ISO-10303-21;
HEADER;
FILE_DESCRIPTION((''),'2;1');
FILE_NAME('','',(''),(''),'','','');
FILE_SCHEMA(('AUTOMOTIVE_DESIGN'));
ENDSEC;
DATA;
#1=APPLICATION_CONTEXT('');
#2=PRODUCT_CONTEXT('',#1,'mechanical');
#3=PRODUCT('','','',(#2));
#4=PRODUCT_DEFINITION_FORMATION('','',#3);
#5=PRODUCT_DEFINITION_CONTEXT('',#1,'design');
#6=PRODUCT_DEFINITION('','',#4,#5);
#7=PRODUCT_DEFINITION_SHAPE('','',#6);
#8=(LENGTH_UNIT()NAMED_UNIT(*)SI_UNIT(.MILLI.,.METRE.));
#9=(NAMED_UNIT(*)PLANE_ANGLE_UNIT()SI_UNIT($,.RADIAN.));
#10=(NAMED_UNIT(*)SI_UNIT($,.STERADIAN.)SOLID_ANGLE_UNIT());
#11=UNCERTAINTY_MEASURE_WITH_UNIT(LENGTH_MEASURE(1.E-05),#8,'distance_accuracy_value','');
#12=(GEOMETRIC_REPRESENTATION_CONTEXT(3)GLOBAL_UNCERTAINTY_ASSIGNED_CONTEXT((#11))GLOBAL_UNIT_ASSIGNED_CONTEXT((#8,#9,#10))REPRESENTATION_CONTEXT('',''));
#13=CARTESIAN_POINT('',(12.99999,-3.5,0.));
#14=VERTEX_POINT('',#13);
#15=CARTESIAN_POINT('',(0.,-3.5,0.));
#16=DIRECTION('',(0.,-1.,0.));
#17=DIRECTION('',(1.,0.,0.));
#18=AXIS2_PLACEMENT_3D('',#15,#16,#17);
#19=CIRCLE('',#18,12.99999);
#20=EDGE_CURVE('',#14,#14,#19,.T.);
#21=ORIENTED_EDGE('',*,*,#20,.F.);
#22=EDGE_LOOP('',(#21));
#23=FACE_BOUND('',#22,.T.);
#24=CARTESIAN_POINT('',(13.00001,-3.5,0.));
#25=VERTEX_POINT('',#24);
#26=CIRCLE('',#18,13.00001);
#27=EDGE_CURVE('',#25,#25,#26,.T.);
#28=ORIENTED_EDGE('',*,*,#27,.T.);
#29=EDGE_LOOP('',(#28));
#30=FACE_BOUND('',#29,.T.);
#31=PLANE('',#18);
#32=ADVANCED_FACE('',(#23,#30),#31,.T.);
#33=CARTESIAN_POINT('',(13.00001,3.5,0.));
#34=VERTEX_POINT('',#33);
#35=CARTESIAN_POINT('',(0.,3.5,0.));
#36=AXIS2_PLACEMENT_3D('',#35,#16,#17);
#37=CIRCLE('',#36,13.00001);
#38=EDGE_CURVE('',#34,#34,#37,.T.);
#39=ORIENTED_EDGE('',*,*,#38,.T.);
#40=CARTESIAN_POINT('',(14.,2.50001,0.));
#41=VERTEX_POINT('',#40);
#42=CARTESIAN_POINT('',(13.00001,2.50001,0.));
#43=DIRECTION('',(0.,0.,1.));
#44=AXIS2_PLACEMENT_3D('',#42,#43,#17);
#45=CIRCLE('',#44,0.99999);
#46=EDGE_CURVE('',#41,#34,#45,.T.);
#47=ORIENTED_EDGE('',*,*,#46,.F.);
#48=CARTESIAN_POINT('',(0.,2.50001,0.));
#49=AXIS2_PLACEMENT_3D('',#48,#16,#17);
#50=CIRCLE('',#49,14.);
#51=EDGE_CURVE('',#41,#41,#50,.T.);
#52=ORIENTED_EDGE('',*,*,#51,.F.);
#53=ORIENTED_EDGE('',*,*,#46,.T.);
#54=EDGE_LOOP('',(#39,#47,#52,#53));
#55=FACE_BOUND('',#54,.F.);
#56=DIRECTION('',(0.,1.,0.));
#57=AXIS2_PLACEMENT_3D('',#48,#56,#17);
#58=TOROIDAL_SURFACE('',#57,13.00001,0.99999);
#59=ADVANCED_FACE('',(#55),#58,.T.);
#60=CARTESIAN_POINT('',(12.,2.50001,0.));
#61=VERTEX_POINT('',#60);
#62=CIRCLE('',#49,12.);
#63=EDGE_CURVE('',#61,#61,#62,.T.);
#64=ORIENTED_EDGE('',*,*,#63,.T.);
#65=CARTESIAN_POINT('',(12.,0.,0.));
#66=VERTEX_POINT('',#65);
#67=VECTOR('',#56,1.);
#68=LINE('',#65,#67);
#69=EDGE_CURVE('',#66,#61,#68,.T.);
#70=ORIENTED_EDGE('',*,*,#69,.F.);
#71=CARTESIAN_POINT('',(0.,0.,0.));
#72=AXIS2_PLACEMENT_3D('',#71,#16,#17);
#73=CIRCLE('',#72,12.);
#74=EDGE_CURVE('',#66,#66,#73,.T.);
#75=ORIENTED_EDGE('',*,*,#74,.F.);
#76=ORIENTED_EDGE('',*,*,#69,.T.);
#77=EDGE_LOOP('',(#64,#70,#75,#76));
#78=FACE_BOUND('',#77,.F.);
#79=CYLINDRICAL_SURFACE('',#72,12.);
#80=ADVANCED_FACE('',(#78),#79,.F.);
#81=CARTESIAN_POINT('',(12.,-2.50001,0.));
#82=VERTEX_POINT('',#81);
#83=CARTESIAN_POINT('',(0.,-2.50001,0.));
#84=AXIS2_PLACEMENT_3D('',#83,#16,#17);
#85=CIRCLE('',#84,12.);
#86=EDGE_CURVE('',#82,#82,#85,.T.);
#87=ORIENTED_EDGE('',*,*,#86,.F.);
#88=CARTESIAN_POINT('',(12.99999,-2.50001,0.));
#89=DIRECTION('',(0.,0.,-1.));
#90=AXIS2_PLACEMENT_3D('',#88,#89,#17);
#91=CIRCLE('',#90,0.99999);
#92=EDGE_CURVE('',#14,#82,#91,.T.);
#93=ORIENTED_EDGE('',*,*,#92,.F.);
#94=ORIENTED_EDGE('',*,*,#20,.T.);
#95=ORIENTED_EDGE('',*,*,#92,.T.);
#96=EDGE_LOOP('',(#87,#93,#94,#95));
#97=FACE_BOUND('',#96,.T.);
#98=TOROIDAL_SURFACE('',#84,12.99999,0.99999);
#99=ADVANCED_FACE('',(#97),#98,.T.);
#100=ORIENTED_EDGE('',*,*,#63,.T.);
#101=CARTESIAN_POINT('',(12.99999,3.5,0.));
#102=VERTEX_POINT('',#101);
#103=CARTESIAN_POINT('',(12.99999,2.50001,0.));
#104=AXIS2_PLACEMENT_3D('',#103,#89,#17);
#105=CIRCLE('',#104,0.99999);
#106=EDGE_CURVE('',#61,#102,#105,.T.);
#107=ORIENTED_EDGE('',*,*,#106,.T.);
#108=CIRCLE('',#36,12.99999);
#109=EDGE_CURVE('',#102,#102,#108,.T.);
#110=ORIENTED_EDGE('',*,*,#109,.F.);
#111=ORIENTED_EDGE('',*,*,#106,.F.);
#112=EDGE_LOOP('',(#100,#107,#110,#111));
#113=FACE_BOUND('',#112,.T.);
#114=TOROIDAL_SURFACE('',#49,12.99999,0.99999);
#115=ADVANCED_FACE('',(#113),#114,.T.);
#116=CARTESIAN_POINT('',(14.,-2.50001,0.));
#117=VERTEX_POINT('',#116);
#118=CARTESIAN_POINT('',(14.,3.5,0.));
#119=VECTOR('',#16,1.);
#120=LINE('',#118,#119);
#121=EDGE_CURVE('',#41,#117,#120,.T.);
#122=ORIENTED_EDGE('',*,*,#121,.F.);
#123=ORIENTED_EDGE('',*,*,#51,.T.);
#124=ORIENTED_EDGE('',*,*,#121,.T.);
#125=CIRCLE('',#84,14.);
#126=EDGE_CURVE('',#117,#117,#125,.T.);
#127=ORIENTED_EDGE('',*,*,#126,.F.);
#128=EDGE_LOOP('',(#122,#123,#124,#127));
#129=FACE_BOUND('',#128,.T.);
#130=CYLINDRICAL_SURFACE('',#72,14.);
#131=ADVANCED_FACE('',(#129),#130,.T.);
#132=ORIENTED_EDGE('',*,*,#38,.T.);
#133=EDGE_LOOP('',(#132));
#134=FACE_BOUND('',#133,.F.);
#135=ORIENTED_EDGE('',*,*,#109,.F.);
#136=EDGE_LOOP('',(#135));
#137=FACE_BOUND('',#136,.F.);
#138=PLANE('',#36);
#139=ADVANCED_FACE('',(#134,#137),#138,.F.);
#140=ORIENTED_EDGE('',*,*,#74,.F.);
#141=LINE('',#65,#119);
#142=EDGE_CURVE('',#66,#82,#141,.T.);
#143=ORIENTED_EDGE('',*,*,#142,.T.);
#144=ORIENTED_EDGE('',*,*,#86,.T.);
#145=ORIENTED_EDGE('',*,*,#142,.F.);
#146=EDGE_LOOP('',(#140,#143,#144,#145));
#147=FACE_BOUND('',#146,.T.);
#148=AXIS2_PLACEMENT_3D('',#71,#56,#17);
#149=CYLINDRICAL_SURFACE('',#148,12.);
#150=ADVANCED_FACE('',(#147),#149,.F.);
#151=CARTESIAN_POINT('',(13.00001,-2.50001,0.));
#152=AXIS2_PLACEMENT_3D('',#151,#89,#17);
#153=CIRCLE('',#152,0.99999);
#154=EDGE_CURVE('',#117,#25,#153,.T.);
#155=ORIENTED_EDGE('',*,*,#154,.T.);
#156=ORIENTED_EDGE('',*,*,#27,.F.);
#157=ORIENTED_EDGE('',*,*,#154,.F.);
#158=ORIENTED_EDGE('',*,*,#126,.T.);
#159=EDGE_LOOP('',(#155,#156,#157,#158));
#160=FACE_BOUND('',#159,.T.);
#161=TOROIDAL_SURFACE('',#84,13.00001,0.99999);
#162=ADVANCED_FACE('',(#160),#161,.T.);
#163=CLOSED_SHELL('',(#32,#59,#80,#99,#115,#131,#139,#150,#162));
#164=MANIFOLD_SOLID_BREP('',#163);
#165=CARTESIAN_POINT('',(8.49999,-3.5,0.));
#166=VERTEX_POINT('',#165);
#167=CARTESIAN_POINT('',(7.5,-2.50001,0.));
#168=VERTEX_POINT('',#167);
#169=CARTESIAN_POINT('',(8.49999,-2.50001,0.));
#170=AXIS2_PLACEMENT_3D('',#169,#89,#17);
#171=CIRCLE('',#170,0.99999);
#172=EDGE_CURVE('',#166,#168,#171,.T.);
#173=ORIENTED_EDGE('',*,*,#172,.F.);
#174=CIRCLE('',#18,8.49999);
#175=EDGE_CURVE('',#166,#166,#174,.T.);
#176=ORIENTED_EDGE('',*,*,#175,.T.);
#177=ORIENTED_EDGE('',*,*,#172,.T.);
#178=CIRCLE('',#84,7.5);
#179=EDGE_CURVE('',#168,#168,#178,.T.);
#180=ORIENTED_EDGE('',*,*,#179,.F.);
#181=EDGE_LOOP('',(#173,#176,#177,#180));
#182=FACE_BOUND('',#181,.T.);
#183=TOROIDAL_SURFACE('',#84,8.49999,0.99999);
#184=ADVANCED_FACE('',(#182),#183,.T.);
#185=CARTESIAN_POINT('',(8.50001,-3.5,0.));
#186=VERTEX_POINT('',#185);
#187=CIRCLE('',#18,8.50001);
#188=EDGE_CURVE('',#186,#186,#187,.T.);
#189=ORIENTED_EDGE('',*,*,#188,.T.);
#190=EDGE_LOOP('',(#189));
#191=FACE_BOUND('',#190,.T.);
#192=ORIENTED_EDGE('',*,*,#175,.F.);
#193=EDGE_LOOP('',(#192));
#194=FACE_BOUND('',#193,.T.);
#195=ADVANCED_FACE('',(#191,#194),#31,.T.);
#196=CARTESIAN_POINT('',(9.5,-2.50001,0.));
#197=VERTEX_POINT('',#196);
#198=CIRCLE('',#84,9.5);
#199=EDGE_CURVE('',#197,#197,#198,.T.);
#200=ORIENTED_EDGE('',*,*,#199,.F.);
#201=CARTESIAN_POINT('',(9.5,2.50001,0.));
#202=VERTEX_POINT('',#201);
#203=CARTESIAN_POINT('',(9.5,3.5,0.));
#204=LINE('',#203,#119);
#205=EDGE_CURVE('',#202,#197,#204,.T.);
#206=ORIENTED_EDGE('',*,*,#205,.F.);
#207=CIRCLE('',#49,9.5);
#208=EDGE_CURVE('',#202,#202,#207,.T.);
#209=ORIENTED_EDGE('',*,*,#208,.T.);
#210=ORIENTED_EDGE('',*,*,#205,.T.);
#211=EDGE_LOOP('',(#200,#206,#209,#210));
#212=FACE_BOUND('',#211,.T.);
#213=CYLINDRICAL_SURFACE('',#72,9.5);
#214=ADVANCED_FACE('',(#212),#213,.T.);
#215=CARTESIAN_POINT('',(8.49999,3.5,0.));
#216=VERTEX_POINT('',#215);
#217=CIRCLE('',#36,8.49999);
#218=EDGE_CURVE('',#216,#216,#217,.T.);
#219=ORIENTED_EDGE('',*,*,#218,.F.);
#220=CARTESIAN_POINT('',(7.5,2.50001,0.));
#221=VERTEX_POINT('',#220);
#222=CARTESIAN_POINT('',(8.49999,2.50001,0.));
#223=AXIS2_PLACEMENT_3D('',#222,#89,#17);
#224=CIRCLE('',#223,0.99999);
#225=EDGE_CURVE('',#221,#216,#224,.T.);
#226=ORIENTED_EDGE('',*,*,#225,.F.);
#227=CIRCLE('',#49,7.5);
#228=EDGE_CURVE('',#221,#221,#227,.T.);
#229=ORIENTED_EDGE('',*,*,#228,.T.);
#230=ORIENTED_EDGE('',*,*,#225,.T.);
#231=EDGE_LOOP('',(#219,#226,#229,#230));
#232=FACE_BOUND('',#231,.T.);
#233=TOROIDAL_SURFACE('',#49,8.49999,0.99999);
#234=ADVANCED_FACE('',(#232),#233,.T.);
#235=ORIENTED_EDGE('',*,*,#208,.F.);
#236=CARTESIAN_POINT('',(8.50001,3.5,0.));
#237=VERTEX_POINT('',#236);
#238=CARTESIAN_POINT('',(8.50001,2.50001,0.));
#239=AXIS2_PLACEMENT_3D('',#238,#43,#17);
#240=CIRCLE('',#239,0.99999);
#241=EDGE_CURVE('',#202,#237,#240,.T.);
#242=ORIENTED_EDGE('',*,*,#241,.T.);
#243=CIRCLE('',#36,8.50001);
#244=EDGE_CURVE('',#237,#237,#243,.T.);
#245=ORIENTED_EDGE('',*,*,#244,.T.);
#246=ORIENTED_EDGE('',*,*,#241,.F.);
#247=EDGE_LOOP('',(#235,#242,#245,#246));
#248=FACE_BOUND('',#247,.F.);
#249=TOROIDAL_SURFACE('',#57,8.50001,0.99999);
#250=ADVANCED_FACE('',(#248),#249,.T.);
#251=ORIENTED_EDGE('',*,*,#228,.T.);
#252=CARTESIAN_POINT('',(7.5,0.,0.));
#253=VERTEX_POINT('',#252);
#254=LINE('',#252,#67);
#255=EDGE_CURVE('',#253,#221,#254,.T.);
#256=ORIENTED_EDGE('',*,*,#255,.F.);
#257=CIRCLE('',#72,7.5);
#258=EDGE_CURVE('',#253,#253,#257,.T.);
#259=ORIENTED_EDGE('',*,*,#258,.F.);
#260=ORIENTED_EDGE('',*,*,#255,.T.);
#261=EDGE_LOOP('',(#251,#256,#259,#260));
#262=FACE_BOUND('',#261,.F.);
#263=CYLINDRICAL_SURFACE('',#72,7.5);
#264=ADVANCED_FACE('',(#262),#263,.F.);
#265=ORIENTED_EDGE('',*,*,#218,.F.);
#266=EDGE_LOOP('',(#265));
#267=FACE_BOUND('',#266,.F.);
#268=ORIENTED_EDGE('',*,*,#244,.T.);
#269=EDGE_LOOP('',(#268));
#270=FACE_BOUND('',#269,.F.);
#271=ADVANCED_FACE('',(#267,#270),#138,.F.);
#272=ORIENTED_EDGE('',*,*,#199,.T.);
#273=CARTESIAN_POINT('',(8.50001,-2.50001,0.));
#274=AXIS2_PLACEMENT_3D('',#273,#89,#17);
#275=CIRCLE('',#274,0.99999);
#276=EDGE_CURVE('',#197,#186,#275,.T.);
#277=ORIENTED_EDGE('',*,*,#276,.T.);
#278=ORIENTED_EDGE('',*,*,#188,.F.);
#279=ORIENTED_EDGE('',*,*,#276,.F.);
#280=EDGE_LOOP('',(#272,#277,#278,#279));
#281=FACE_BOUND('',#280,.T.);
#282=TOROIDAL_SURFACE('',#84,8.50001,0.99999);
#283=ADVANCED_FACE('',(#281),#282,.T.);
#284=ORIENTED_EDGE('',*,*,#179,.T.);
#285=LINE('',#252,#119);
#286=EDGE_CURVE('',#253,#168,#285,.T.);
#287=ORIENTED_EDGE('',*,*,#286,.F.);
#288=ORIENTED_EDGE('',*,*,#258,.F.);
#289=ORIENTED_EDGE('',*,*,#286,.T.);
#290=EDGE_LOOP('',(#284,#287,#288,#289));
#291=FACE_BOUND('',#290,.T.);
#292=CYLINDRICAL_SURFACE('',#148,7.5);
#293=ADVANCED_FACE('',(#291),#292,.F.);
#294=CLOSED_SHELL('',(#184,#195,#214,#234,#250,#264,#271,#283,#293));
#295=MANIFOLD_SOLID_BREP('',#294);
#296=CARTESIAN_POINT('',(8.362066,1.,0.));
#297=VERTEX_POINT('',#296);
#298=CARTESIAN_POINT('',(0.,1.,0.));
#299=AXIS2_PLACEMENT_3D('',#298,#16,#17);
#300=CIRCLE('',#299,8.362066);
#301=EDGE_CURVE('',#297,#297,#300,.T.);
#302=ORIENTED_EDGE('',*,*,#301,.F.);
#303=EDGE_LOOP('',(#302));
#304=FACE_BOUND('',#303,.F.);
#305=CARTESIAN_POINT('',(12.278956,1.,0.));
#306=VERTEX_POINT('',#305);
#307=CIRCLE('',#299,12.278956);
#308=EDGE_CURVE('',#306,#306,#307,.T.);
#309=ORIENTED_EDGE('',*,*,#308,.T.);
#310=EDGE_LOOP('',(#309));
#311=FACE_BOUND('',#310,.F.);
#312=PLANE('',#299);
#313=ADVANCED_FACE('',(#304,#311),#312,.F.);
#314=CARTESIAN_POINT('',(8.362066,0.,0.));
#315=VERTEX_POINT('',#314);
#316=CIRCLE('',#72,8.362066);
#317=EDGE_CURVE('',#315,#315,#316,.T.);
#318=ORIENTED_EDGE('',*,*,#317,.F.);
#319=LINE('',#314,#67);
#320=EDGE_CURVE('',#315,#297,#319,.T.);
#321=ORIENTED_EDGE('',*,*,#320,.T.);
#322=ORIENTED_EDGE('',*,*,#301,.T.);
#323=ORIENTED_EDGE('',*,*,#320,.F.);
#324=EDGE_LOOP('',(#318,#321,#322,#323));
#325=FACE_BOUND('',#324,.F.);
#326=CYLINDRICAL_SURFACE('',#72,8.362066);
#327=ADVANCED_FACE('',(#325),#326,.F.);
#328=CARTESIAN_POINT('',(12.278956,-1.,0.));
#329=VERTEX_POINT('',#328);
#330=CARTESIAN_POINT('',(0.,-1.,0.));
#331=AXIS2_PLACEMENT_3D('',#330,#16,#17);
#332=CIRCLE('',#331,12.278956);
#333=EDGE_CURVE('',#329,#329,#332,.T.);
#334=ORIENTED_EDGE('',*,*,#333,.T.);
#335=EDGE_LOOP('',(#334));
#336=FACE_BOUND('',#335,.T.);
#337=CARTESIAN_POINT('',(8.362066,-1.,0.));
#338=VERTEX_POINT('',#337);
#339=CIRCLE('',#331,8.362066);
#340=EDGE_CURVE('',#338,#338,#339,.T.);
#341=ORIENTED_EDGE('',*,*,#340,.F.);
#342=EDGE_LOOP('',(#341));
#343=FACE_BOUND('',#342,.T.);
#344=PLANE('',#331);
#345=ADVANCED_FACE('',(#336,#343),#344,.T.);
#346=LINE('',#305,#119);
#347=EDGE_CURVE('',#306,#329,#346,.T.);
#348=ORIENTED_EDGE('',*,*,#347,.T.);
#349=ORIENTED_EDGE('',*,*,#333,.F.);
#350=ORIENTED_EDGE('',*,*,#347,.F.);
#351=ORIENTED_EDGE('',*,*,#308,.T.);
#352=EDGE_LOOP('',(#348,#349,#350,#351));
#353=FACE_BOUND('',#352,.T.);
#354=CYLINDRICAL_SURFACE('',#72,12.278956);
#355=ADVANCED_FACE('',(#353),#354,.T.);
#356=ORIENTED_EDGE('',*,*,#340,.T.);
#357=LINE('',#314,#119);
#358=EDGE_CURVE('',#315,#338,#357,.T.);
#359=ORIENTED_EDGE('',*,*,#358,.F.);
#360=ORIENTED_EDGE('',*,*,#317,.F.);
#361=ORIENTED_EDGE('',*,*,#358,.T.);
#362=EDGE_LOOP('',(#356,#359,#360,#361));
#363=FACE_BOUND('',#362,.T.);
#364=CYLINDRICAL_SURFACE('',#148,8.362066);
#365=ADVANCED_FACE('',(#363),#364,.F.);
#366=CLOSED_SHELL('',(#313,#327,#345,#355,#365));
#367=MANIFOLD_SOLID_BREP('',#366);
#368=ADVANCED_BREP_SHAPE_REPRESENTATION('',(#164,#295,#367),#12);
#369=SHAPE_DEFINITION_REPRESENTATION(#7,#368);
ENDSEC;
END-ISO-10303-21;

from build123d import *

# Parameters (mm, degrees)
F0_R          = 14
F0_R_2        = 12
F1_DEPTH      = 3.5
F1_DEPTH_BACK = 3.5
F2_R          = 9.5
F2_R_2        = 7.5
F3_DEPTH      = 3.5
F3_DEPTH_BACK = 3.5
F4_R          = 12.2789559666
F4_R_2        = 8.3620661584
F5_DEPTH      = 1
F5_DEPTH_BACK = 1
F6_R          = 0.99999
F6_2_R        = 0.99999


# Not quite as in the source:
# - a fillet or chamfer is up to 0.001 mm smaller than in the source, because OpenCascade refuses the exact size


with BuildPart() as f1:
    # F0 (on Front) → F1 (new body, two sides)
    with BuildSketch(Plane.XZ) as f1_sk:
        Circle(F0_R)
        Circle(F0_R_2, mode=Mode.SUBTRACT)
    extrude(amount=F1_DEPTH)
    extrude(f1_sk.sketch, amount=-F1_DEPTH_BACK)

    # F6 (radius 1 in the source; OpenCascade refuses exactly that, so slightly less here)
    f6_edges = [f1.edges().sort_by_distance(p)[0] for p in [
        (-12, -3.5, 0),
        (-14, -3.5, 0),
        (-12, 3.5, 0),
        (-14, 3.5, 0),
    ]]
    fillet(f6_edges, radius=F6_R)


with BuildPart() as f3:
    # F2 (on Front) → F3 (new body, two sides)
    with BuildSketch(Plane.XZ) as f3_sk:
        Circle(F2_R)
        Circle(F2_R_2, mode=Mode.SUBTRACT)
    extrude(amount=F3_DEPTH)
    extrude(f3_sk.sketch, amount=-F3_DEPTH_BACK)

    # F6#2 (radius 1 in the source; OpenCascade refuses exactly that, so slightly less here)
    f6_2_edges = [f3.edges().sort_by_distance(p)[0] for p in [
        (-9.5, -3.5, 0),
        (-7.5, -3.5, 0),
        (-7.5, 3.5, 0),
        (-9.5, 3.5, 0),
    ]]
    fillet(f6_2_edges, radius=F6_2_R)


with BuildPart() as f5:
    # F4 (on Front) → F5 (new body, two sides)
    with BuildSketch(Plane.XZ) as f5_sk:
        Circle(F4_R)
        Circle(F4_R_2, mode=Mode.SUBTRACT)
    extrude(amount=F5_DEPTH)
    extrude(f5_sk.sketch, amount=-F5_DEPTH_BACK)


solid = Compound([f1.part, f3.part, f5.part])
